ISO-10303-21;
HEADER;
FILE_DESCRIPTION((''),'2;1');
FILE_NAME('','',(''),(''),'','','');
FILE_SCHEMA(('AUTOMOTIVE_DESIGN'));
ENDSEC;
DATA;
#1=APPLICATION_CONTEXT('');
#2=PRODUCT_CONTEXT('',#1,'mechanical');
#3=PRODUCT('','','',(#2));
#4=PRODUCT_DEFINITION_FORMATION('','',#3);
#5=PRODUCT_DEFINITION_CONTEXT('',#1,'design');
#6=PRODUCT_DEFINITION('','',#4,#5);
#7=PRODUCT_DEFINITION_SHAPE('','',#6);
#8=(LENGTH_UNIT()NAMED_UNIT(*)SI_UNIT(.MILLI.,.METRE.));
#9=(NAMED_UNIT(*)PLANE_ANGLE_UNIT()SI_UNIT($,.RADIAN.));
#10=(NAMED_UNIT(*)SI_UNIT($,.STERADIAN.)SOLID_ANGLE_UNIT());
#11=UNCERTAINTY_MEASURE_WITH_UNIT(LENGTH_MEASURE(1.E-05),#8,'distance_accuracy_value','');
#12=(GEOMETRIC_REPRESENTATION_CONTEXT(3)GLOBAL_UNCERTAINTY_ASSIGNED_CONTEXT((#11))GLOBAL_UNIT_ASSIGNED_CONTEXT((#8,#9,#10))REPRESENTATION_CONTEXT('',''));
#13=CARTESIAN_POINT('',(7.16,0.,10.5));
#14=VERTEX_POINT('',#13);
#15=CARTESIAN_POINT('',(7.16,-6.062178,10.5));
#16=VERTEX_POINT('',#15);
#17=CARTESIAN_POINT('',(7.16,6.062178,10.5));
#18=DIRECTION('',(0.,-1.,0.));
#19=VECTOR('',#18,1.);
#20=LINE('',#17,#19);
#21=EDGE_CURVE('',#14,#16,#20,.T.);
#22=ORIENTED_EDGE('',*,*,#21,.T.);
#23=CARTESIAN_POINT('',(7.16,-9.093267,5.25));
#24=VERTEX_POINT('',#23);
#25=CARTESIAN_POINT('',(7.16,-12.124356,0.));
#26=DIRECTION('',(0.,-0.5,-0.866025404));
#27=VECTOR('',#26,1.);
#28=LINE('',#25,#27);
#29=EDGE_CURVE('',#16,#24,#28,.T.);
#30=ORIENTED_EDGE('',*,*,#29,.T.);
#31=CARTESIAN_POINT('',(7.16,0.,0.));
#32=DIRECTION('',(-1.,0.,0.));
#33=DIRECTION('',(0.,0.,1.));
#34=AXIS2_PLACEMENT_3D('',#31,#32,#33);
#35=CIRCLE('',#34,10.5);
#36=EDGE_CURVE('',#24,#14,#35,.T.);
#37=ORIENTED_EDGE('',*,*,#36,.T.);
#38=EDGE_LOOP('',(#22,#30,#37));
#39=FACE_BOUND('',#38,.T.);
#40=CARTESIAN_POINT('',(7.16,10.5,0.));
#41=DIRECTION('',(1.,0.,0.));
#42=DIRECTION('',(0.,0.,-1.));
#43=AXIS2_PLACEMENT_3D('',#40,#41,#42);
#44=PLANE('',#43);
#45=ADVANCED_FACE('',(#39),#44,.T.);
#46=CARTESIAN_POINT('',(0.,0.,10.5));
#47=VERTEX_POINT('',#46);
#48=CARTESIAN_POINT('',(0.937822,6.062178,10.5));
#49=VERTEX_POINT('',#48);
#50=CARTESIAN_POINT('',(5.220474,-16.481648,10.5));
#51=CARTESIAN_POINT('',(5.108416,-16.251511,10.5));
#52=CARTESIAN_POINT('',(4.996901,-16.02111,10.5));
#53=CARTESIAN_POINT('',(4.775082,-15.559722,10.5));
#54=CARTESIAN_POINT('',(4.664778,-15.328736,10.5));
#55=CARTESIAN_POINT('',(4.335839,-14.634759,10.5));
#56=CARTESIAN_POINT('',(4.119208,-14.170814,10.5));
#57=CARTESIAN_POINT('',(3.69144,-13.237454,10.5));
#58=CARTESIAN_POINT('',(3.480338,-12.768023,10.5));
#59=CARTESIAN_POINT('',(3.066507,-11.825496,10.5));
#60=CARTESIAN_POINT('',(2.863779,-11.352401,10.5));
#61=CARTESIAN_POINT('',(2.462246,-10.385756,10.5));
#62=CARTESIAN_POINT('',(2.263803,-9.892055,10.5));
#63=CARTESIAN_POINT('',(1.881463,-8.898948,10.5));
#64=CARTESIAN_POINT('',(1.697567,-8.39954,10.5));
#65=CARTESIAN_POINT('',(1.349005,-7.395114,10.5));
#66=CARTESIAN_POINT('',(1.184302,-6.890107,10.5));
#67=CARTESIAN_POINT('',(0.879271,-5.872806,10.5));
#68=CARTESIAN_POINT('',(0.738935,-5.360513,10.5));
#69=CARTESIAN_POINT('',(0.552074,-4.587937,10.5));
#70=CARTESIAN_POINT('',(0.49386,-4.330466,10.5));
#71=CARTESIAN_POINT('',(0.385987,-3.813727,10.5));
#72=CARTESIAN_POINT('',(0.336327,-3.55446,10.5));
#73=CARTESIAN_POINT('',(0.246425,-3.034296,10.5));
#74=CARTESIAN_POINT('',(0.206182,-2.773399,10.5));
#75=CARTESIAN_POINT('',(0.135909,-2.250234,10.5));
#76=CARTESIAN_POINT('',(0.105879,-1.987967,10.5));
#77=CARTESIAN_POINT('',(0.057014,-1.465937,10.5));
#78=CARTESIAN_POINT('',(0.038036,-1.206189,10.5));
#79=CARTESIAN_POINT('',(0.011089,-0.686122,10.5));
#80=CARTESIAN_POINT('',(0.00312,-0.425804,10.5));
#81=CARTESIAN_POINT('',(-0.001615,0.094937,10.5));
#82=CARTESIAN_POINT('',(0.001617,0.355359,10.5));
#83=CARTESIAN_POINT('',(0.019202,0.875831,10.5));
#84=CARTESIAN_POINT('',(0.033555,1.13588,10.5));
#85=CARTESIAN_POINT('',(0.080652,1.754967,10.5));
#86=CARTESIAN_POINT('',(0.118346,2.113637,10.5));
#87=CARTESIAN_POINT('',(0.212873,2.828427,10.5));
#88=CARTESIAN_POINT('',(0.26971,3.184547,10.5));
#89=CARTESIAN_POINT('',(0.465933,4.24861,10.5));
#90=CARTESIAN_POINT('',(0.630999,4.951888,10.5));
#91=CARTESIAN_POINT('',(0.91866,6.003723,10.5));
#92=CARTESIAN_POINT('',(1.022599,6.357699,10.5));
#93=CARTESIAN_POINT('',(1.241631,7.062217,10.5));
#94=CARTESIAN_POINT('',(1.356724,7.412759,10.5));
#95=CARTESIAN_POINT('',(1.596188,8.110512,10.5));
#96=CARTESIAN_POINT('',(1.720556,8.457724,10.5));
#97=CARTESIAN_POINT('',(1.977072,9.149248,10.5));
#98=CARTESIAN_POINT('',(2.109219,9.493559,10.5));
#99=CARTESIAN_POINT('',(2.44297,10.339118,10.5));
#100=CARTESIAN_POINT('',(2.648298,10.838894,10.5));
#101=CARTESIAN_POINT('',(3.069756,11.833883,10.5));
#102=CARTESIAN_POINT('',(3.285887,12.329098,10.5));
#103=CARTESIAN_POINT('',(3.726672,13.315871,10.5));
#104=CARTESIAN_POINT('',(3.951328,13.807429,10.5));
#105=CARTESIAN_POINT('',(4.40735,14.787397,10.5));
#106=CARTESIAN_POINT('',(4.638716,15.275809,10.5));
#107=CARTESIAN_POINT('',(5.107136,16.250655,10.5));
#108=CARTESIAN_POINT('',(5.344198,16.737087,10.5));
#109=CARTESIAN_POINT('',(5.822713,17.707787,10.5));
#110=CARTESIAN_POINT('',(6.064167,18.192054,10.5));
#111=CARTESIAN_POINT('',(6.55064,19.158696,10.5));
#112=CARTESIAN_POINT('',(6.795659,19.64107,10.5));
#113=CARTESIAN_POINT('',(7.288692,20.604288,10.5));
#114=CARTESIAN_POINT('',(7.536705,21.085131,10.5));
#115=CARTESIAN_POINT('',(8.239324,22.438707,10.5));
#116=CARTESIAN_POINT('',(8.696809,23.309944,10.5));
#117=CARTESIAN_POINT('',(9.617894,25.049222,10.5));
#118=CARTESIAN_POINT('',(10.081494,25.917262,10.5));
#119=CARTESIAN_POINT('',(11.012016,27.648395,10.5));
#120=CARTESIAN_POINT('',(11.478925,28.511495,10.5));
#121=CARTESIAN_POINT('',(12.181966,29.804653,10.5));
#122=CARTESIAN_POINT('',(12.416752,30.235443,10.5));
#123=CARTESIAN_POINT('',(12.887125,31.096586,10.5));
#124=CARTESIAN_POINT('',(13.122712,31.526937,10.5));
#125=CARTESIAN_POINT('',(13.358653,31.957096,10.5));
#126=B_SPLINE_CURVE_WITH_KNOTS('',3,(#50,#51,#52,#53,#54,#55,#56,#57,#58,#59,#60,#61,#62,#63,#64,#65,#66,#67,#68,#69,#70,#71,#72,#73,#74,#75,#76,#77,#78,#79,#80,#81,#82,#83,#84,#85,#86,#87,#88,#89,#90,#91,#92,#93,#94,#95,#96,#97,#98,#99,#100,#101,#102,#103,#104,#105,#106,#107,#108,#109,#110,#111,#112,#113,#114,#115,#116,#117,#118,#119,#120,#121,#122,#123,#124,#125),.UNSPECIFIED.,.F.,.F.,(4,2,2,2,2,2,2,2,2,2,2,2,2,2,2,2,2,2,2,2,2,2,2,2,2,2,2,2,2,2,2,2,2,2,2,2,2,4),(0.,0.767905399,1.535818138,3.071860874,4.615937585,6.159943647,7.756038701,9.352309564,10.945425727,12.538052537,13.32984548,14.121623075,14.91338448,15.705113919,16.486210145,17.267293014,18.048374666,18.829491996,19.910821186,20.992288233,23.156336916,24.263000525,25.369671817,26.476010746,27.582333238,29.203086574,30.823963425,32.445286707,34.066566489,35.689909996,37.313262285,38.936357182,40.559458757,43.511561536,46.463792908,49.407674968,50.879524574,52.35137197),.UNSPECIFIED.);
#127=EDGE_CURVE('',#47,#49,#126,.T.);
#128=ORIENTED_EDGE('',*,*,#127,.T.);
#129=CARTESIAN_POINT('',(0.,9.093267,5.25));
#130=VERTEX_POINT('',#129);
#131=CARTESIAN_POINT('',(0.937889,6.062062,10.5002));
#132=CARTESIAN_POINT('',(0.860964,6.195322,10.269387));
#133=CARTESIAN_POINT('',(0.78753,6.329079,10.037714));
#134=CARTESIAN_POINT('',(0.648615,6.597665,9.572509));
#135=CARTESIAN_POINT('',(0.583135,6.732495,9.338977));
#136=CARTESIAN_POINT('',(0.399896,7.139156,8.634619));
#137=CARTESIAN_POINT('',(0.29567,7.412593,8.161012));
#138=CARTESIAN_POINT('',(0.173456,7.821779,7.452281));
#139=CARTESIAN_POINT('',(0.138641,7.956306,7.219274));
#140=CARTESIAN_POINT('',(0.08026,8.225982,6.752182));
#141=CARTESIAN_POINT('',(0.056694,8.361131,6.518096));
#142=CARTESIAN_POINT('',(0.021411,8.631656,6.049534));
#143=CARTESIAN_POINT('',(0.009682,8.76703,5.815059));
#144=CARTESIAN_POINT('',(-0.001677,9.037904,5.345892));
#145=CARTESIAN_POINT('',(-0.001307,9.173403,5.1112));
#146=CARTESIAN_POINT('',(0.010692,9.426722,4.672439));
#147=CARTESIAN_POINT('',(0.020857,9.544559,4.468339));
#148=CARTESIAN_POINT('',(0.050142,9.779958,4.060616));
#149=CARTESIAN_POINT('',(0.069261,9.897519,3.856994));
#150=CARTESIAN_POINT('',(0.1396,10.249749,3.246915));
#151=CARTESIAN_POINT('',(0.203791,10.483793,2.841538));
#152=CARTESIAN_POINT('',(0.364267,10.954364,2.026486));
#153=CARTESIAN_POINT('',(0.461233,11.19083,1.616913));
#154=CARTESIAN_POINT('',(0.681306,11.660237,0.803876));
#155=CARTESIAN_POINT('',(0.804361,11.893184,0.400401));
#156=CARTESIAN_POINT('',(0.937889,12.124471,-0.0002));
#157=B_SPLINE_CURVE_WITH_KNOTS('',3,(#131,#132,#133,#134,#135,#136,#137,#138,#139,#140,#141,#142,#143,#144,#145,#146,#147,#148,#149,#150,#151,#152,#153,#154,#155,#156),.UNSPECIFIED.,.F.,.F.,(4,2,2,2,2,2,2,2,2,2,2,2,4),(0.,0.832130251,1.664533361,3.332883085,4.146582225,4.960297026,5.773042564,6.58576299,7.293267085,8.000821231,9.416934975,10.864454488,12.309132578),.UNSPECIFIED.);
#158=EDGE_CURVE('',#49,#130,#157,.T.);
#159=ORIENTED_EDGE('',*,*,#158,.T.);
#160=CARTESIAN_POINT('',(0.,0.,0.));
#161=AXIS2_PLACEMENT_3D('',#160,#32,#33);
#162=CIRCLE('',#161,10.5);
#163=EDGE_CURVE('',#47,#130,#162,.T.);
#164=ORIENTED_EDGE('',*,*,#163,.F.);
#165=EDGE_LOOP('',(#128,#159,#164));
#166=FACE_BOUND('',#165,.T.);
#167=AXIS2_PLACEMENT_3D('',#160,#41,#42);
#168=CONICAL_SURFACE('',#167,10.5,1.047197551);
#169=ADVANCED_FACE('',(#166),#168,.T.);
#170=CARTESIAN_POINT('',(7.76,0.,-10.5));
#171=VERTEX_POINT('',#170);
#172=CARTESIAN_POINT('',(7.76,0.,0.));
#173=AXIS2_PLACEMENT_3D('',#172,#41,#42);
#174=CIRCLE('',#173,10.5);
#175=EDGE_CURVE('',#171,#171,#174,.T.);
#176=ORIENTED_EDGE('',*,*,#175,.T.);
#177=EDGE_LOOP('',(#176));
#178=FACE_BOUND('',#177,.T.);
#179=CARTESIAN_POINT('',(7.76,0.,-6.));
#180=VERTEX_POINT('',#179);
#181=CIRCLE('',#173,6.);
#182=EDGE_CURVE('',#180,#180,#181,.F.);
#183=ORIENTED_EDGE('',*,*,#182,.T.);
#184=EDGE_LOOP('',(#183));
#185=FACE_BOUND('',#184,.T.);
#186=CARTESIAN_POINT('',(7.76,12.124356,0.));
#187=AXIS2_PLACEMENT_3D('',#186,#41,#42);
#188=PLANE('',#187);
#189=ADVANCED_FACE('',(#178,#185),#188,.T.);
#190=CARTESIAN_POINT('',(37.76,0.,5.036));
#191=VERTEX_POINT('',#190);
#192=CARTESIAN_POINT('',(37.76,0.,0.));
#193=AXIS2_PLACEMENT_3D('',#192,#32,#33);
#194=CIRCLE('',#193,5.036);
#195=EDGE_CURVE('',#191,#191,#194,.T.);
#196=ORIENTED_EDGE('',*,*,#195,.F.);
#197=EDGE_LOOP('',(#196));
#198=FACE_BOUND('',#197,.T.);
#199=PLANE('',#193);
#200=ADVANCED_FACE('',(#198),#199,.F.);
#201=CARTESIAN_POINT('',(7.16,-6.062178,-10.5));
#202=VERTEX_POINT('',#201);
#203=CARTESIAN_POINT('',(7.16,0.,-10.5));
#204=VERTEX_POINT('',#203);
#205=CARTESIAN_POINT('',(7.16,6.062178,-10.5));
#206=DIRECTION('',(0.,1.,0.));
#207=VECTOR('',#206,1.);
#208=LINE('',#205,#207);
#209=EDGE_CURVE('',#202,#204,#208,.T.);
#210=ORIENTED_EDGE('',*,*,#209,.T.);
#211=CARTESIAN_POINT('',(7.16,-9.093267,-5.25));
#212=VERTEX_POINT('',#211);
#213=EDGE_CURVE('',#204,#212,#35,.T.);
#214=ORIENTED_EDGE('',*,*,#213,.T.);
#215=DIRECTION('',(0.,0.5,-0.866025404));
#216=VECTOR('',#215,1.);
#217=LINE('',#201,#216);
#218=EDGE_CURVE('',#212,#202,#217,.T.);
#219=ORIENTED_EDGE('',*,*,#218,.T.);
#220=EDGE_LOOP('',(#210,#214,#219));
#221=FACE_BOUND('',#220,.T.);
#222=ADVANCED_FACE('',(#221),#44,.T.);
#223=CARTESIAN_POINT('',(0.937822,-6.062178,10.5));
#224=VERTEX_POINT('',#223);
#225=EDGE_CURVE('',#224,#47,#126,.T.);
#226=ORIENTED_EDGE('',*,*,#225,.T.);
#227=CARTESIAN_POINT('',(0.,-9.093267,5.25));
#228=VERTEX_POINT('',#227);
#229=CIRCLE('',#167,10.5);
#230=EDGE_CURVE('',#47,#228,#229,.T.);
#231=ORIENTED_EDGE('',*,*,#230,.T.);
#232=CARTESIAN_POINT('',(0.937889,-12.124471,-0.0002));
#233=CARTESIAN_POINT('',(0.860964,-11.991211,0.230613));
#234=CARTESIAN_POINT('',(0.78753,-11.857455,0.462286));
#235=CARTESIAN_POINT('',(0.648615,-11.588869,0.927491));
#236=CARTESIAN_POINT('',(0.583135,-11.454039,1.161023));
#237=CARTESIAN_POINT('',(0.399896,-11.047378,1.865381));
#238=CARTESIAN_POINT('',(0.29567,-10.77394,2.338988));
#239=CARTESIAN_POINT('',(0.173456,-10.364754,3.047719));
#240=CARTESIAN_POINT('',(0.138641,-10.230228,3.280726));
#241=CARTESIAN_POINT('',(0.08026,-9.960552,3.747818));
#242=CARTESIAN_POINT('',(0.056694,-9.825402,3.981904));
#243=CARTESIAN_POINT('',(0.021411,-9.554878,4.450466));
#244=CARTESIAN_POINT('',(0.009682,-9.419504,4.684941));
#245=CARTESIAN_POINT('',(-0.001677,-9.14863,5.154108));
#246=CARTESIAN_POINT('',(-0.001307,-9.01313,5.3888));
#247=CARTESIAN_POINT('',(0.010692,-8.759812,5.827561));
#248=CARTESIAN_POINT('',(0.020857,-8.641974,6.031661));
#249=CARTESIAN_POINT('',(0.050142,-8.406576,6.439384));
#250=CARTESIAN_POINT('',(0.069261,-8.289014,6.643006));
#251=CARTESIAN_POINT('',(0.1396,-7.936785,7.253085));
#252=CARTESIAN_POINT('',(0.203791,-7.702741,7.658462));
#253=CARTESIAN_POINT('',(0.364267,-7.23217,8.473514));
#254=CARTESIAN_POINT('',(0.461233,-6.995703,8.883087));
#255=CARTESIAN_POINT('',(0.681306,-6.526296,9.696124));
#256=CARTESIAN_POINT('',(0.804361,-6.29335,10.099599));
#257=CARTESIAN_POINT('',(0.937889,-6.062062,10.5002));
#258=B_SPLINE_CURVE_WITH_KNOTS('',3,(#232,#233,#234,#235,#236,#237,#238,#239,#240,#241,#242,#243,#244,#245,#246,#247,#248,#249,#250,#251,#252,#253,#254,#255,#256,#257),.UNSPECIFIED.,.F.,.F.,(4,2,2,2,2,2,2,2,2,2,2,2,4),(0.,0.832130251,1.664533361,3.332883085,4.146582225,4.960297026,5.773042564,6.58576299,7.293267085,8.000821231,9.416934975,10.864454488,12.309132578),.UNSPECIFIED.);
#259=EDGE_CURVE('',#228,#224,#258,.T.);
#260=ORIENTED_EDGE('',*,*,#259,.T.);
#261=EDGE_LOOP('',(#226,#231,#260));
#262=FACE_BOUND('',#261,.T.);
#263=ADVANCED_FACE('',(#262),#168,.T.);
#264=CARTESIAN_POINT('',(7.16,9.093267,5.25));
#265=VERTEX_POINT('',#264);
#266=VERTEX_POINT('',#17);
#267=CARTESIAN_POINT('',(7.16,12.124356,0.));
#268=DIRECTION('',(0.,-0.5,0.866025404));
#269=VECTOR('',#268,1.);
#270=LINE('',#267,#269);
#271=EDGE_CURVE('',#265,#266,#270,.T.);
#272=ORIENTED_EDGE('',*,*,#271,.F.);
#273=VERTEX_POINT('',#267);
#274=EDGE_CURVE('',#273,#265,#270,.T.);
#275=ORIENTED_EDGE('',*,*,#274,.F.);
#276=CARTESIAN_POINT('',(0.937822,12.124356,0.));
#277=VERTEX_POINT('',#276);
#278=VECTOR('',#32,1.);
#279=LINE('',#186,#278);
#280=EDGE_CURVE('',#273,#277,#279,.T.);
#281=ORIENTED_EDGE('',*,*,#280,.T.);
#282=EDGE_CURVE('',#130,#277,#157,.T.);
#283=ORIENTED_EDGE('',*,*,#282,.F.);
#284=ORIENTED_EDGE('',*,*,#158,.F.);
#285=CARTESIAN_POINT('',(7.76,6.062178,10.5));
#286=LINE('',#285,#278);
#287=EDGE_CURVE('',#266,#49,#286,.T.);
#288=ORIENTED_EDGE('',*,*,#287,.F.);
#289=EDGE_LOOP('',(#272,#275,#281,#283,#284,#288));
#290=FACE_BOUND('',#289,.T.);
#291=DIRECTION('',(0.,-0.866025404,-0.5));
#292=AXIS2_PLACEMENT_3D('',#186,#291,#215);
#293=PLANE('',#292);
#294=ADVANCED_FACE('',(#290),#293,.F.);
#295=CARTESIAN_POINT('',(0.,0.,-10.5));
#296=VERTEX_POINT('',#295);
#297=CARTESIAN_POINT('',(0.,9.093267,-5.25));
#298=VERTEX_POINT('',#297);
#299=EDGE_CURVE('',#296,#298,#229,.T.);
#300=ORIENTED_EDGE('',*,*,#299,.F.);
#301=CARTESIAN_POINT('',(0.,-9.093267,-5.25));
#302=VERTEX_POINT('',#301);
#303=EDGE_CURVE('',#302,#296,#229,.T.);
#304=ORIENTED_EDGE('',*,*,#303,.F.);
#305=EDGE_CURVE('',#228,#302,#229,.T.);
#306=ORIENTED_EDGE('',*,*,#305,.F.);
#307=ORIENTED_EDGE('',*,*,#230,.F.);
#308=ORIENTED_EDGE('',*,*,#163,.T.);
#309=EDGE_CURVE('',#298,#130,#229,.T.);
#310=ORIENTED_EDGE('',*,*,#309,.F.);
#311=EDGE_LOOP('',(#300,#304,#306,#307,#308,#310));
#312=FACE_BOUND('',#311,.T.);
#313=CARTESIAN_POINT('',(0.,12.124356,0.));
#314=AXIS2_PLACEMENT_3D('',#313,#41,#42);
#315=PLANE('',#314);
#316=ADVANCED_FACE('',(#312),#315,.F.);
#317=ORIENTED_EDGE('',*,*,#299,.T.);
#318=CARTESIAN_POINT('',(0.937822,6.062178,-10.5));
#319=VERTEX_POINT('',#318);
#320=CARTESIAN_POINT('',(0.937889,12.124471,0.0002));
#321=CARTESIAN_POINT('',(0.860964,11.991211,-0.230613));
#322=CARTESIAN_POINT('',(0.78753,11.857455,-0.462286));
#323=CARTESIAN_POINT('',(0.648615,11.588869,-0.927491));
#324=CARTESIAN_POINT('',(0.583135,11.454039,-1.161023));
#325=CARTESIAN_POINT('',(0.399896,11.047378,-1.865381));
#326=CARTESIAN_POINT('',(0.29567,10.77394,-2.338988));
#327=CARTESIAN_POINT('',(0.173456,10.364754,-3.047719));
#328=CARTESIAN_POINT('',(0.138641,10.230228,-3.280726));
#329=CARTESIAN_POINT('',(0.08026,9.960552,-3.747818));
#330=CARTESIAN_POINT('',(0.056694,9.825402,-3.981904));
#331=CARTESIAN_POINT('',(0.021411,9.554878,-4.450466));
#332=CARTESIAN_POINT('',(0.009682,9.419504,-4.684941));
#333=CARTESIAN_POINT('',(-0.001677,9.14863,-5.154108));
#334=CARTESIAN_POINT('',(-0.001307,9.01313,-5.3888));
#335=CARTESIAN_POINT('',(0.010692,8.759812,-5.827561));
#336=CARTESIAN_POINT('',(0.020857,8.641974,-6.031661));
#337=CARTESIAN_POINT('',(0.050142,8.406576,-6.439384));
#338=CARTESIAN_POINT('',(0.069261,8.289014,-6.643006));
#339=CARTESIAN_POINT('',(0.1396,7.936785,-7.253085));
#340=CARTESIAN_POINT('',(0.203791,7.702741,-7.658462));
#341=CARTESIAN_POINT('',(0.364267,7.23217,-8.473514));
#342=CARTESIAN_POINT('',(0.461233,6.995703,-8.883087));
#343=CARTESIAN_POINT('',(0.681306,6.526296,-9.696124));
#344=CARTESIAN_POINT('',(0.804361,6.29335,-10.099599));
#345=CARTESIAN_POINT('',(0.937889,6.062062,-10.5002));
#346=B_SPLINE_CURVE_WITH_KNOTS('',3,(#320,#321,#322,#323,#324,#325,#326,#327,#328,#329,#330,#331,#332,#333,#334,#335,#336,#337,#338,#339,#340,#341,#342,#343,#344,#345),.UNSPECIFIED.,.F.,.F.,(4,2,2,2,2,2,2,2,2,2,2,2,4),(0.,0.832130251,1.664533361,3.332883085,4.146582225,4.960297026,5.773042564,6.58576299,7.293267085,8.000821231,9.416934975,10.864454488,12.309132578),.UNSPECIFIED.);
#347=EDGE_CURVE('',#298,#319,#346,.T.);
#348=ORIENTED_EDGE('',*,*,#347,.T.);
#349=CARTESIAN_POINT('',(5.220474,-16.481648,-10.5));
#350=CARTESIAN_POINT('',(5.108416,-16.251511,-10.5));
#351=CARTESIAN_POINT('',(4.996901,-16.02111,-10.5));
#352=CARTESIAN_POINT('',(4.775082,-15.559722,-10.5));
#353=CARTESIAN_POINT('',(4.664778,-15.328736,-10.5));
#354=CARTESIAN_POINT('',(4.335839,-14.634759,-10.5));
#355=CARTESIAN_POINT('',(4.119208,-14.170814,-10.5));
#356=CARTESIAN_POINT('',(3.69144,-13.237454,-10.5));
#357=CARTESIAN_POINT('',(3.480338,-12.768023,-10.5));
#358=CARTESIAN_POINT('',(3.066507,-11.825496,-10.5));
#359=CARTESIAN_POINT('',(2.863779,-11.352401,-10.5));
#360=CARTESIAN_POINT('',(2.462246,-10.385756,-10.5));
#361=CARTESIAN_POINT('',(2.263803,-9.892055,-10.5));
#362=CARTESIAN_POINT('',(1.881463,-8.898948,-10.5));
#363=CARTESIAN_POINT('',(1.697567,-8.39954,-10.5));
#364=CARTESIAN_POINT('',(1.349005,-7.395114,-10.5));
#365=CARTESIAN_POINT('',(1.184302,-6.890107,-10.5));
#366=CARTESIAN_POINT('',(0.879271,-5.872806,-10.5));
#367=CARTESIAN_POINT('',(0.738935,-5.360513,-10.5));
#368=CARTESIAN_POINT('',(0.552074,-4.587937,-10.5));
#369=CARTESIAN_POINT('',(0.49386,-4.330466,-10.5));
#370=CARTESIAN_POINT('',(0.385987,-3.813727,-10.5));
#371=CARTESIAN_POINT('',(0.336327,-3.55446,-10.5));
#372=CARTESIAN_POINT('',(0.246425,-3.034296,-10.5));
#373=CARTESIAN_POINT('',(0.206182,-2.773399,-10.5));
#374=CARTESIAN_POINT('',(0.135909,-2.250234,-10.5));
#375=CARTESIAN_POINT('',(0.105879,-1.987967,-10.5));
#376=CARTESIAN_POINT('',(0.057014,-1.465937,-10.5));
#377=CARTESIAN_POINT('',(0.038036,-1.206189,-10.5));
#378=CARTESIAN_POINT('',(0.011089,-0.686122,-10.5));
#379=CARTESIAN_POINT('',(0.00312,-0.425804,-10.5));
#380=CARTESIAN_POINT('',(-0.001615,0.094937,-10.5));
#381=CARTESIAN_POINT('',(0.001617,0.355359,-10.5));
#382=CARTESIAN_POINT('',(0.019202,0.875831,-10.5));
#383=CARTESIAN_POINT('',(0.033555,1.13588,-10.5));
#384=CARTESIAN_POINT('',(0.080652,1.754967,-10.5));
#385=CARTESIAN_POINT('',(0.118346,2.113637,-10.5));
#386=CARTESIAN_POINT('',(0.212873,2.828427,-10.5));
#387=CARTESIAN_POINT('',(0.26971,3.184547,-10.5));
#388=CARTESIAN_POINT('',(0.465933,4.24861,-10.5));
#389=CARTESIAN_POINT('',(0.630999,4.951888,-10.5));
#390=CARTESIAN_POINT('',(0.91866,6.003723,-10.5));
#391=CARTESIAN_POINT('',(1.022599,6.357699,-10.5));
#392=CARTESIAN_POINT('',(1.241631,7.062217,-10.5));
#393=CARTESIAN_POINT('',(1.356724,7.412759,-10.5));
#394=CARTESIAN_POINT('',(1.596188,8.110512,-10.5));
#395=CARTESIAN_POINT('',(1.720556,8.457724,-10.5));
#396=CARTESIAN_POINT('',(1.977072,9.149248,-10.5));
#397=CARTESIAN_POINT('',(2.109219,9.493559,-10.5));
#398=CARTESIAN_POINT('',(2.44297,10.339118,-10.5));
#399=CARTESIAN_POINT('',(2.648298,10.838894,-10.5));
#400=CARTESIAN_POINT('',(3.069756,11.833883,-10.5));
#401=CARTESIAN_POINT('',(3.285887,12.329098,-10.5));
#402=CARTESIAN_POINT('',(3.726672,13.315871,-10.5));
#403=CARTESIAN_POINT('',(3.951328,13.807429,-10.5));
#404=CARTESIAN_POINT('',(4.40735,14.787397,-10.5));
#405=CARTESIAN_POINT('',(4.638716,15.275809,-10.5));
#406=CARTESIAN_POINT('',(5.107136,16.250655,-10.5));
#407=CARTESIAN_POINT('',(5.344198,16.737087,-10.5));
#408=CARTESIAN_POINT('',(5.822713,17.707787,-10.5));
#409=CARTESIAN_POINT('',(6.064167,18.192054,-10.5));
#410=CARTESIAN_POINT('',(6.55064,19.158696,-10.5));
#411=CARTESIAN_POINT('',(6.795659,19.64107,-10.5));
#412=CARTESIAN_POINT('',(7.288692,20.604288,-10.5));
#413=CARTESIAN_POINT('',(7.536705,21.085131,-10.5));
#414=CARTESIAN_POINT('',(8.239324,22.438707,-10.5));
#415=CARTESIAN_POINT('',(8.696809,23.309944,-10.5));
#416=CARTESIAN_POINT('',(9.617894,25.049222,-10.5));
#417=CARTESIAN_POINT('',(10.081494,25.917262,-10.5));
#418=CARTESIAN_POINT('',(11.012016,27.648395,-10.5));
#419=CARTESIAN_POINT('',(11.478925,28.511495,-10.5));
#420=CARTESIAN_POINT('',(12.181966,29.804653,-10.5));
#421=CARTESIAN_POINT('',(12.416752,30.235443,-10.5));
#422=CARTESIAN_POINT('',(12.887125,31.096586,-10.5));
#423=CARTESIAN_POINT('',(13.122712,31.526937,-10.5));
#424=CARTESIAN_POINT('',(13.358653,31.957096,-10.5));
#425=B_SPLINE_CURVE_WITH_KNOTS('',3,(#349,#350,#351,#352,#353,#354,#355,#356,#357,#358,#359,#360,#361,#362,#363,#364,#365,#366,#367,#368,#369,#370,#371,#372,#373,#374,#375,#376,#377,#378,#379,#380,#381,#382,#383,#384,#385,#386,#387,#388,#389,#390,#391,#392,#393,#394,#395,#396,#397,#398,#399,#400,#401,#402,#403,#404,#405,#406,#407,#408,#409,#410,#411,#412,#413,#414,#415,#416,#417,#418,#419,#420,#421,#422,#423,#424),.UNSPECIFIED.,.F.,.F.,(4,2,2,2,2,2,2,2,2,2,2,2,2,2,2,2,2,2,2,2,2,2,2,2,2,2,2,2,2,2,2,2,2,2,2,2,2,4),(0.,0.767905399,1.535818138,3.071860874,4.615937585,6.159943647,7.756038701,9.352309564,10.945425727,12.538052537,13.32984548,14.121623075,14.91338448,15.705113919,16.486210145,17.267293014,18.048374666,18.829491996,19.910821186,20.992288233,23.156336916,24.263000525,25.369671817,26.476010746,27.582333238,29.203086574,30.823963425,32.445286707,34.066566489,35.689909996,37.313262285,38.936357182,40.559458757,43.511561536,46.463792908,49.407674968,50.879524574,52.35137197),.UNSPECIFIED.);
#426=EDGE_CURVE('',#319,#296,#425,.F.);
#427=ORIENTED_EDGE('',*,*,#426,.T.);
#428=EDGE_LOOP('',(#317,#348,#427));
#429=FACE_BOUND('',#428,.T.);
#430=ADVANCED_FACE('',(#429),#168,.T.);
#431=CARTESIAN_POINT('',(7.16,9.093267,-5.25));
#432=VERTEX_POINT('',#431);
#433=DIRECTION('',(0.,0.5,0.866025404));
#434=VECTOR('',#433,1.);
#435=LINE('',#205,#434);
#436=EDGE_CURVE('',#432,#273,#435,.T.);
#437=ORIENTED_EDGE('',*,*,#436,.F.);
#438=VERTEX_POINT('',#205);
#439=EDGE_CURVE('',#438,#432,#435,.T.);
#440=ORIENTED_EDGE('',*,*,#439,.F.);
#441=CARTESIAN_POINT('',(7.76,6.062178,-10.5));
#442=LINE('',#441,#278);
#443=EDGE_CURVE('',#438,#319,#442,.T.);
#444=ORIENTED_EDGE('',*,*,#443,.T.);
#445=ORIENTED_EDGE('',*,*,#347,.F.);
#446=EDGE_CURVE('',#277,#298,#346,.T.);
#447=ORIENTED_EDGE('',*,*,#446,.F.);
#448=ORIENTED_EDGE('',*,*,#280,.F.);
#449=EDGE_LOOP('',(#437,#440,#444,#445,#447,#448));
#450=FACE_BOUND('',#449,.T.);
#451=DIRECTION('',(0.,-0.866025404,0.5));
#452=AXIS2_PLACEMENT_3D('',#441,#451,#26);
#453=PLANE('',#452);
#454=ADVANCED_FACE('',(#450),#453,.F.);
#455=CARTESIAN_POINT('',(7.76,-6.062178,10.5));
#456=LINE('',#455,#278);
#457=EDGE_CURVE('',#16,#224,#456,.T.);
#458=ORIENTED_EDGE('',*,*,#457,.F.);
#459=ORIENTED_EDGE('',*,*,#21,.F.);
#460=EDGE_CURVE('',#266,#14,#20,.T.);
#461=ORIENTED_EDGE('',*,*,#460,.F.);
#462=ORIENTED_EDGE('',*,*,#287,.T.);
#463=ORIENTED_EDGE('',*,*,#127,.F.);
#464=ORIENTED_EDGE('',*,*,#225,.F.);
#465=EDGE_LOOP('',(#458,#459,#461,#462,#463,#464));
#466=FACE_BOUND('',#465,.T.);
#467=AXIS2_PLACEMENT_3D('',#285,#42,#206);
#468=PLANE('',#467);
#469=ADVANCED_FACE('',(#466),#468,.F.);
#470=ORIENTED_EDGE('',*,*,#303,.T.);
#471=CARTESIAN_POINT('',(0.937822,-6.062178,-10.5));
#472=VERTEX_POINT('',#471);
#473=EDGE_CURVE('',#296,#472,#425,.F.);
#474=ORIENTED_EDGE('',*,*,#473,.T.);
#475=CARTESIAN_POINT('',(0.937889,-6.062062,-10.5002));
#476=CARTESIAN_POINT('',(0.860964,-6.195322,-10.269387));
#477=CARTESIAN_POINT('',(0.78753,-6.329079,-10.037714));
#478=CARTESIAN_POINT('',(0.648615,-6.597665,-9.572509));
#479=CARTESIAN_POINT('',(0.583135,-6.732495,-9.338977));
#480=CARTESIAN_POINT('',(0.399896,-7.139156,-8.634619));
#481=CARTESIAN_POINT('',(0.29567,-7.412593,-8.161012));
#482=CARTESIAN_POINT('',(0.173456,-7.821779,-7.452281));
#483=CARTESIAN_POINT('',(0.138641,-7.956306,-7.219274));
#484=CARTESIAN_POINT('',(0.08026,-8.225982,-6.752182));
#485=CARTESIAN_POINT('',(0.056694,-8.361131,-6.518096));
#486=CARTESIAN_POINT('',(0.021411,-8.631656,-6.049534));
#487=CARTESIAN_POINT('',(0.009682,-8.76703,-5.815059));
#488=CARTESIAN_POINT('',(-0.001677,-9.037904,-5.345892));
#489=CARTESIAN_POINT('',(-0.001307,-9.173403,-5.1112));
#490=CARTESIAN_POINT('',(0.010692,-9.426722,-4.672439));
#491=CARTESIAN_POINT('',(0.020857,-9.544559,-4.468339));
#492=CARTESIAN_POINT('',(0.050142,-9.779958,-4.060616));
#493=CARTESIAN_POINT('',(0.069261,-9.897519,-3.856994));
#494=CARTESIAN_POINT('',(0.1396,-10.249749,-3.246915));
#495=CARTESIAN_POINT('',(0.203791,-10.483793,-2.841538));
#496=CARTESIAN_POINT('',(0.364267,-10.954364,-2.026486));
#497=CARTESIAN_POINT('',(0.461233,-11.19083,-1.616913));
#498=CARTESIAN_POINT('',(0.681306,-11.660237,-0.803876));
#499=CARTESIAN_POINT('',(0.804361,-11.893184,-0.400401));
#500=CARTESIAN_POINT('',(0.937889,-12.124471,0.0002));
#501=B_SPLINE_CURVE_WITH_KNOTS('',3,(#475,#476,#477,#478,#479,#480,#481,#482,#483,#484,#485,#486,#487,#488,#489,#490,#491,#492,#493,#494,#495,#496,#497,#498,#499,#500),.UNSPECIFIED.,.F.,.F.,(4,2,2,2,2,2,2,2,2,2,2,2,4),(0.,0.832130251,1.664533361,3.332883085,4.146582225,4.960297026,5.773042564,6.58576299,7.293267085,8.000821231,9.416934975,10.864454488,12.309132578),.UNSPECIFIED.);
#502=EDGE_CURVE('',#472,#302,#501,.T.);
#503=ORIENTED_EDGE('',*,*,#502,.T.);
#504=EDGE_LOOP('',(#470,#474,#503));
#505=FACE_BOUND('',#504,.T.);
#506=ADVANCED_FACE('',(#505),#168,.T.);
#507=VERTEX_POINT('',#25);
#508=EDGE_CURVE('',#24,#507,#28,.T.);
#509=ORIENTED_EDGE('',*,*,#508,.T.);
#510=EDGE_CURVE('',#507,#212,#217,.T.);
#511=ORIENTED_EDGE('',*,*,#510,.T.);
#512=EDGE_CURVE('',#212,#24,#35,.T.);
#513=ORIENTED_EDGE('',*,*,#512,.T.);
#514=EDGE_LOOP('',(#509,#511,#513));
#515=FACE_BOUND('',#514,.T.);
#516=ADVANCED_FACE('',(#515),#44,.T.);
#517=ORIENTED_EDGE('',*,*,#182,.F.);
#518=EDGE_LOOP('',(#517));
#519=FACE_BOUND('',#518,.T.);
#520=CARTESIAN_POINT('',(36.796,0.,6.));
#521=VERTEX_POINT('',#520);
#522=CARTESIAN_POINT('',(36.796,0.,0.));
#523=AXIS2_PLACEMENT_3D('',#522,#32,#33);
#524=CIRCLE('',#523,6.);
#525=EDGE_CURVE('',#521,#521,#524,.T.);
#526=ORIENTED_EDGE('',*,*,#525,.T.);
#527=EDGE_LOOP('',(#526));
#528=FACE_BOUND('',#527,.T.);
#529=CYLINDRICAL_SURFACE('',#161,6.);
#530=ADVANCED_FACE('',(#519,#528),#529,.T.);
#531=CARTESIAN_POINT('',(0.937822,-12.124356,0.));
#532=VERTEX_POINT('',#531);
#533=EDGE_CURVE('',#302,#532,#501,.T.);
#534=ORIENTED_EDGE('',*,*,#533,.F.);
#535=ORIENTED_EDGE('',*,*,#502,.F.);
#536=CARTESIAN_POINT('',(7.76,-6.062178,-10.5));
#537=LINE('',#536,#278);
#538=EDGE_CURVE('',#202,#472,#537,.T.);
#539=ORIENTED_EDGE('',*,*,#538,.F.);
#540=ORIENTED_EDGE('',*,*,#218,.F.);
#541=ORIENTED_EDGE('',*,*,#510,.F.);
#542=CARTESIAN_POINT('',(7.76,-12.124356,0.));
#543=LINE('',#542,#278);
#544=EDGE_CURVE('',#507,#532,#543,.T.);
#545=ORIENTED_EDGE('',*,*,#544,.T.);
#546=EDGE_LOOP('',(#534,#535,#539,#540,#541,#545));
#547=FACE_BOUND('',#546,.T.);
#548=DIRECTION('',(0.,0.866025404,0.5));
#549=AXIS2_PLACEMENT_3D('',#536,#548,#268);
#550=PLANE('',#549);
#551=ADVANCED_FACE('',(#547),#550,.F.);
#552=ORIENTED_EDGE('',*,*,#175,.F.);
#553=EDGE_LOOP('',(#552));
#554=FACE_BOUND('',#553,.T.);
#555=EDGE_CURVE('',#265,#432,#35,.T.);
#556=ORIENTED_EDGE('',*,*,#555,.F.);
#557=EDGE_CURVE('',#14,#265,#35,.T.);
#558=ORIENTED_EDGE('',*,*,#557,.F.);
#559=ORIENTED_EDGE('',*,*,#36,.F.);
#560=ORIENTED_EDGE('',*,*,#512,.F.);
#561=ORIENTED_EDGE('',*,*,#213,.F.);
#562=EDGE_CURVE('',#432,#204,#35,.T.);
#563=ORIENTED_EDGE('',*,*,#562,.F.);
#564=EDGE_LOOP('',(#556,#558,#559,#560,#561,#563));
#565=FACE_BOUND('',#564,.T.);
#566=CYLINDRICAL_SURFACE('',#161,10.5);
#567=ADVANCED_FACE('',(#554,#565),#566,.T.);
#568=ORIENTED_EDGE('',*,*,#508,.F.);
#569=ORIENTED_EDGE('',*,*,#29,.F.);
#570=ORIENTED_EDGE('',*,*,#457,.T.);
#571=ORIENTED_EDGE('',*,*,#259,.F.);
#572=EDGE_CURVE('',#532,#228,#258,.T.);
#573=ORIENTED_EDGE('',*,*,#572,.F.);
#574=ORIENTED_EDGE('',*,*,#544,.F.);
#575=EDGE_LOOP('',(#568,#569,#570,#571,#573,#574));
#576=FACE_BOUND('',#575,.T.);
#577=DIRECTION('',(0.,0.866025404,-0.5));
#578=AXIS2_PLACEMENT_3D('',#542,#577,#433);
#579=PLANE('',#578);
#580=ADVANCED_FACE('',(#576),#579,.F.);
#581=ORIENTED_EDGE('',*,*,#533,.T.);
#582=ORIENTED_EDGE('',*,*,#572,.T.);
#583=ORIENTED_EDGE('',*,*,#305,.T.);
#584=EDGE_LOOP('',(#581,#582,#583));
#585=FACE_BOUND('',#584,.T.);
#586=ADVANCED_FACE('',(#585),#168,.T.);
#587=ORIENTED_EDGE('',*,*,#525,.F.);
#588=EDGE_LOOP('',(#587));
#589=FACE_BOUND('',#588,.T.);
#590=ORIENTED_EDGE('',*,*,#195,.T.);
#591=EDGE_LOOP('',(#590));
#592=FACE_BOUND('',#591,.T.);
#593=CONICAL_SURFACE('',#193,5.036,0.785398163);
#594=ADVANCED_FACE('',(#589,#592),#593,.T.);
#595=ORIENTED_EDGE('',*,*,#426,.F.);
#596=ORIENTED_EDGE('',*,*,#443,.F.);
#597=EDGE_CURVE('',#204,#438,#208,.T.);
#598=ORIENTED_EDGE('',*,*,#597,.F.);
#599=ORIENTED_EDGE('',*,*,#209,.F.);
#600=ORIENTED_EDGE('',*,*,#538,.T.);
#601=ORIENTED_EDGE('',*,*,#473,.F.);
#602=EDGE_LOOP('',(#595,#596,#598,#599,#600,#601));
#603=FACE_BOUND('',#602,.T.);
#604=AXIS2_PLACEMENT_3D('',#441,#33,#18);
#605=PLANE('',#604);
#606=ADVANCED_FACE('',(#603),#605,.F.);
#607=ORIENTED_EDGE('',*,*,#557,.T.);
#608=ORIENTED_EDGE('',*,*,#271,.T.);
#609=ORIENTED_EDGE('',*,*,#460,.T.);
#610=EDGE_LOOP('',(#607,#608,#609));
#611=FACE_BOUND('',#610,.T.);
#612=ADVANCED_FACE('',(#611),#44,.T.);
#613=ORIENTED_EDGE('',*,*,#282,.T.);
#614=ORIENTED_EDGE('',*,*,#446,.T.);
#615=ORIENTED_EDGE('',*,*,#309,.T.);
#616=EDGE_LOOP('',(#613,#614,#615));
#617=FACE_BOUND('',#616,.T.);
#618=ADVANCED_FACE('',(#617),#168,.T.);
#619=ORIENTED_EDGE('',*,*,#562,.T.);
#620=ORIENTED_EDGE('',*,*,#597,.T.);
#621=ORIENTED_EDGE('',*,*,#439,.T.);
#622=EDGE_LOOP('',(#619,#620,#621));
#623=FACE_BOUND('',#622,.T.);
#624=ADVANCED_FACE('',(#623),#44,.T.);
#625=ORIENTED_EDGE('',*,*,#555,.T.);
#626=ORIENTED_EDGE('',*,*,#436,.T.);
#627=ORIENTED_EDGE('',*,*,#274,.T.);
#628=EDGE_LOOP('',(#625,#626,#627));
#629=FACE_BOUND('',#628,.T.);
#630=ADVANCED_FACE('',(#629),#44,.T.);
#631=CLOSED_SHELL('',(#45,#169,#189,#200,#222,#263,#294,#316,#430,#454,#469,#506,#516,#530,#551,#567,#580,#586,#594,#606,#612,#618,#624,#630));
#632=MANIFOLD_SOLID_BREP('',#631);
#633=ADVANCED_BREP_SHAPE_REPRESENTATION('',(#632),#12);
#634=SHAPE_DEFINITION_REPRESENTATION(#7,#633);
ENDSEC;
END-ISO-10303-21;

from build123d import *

# Parameters (mm, degrees)
BASEHEAD_DEPTH = 7.76
SKETCH4_W      = 0.6
SKETCH4_H      = 11.624355653


# Read off the part's stored shape, not the designer's step: HeadChamfer
with BuildPart() as part:
    # Sketch1 → BaseHead (new body)
    with BuildSketch(Plane(origin=(0, 0, 0), x_dir=(0, 0, -1), z_dir=(1, 0, 0))):
        Polygon((10.5, 6.062177826), (10.5, -6.062177826), (0, -12.124355653), (-10.5, -6.062177826), (-10.5, 6.062177826), (0, 12.124355653), align=None)
    extrude(amount=BASEHEAD_DEPTH)

    # HeadChamfer outline → HeadChamfer (revolve, cut)
    with BuildSketch(Plane.YX):
        Polygon((12.124355657, 0.937822176), (10.5, 0), (12.124355657, 0), align=None)
    revolve(axis=Axis((0, 0, 0), (1, 0, 0)), mode=Mode.SUBTRACT)

    # HeadChamfer 2 outline → HeadChamfer 2 (revolve)
    with BuildSketch(Plane.YX):
        Polygon((6, 7.76), (6, 36.796), (5.036, 37.76), (0, 37.76), (0, 7.76), align=None)
    revolve(axis=Axis((0, 0, 0), (1, 0, 0)))

    # Sketch4 → BearingFace (revolve, cut)
    with BuildSketch(Plane.XY, mode=Mode.PRIVATE) as bearingface_sk:
        with Locations((7.46, 16.312177827)):
            Rectangle(SKETCH4_W, SKETCH4_H)
    revolve(bearingface_sk.sketch.rotate(Axis((0, 0, 0), (1, 0, 0)), 90), axis=Axis((0, 0, 0), (1, 0, 0)), mode=Mode.SUBTRACT)


solid = part.part
